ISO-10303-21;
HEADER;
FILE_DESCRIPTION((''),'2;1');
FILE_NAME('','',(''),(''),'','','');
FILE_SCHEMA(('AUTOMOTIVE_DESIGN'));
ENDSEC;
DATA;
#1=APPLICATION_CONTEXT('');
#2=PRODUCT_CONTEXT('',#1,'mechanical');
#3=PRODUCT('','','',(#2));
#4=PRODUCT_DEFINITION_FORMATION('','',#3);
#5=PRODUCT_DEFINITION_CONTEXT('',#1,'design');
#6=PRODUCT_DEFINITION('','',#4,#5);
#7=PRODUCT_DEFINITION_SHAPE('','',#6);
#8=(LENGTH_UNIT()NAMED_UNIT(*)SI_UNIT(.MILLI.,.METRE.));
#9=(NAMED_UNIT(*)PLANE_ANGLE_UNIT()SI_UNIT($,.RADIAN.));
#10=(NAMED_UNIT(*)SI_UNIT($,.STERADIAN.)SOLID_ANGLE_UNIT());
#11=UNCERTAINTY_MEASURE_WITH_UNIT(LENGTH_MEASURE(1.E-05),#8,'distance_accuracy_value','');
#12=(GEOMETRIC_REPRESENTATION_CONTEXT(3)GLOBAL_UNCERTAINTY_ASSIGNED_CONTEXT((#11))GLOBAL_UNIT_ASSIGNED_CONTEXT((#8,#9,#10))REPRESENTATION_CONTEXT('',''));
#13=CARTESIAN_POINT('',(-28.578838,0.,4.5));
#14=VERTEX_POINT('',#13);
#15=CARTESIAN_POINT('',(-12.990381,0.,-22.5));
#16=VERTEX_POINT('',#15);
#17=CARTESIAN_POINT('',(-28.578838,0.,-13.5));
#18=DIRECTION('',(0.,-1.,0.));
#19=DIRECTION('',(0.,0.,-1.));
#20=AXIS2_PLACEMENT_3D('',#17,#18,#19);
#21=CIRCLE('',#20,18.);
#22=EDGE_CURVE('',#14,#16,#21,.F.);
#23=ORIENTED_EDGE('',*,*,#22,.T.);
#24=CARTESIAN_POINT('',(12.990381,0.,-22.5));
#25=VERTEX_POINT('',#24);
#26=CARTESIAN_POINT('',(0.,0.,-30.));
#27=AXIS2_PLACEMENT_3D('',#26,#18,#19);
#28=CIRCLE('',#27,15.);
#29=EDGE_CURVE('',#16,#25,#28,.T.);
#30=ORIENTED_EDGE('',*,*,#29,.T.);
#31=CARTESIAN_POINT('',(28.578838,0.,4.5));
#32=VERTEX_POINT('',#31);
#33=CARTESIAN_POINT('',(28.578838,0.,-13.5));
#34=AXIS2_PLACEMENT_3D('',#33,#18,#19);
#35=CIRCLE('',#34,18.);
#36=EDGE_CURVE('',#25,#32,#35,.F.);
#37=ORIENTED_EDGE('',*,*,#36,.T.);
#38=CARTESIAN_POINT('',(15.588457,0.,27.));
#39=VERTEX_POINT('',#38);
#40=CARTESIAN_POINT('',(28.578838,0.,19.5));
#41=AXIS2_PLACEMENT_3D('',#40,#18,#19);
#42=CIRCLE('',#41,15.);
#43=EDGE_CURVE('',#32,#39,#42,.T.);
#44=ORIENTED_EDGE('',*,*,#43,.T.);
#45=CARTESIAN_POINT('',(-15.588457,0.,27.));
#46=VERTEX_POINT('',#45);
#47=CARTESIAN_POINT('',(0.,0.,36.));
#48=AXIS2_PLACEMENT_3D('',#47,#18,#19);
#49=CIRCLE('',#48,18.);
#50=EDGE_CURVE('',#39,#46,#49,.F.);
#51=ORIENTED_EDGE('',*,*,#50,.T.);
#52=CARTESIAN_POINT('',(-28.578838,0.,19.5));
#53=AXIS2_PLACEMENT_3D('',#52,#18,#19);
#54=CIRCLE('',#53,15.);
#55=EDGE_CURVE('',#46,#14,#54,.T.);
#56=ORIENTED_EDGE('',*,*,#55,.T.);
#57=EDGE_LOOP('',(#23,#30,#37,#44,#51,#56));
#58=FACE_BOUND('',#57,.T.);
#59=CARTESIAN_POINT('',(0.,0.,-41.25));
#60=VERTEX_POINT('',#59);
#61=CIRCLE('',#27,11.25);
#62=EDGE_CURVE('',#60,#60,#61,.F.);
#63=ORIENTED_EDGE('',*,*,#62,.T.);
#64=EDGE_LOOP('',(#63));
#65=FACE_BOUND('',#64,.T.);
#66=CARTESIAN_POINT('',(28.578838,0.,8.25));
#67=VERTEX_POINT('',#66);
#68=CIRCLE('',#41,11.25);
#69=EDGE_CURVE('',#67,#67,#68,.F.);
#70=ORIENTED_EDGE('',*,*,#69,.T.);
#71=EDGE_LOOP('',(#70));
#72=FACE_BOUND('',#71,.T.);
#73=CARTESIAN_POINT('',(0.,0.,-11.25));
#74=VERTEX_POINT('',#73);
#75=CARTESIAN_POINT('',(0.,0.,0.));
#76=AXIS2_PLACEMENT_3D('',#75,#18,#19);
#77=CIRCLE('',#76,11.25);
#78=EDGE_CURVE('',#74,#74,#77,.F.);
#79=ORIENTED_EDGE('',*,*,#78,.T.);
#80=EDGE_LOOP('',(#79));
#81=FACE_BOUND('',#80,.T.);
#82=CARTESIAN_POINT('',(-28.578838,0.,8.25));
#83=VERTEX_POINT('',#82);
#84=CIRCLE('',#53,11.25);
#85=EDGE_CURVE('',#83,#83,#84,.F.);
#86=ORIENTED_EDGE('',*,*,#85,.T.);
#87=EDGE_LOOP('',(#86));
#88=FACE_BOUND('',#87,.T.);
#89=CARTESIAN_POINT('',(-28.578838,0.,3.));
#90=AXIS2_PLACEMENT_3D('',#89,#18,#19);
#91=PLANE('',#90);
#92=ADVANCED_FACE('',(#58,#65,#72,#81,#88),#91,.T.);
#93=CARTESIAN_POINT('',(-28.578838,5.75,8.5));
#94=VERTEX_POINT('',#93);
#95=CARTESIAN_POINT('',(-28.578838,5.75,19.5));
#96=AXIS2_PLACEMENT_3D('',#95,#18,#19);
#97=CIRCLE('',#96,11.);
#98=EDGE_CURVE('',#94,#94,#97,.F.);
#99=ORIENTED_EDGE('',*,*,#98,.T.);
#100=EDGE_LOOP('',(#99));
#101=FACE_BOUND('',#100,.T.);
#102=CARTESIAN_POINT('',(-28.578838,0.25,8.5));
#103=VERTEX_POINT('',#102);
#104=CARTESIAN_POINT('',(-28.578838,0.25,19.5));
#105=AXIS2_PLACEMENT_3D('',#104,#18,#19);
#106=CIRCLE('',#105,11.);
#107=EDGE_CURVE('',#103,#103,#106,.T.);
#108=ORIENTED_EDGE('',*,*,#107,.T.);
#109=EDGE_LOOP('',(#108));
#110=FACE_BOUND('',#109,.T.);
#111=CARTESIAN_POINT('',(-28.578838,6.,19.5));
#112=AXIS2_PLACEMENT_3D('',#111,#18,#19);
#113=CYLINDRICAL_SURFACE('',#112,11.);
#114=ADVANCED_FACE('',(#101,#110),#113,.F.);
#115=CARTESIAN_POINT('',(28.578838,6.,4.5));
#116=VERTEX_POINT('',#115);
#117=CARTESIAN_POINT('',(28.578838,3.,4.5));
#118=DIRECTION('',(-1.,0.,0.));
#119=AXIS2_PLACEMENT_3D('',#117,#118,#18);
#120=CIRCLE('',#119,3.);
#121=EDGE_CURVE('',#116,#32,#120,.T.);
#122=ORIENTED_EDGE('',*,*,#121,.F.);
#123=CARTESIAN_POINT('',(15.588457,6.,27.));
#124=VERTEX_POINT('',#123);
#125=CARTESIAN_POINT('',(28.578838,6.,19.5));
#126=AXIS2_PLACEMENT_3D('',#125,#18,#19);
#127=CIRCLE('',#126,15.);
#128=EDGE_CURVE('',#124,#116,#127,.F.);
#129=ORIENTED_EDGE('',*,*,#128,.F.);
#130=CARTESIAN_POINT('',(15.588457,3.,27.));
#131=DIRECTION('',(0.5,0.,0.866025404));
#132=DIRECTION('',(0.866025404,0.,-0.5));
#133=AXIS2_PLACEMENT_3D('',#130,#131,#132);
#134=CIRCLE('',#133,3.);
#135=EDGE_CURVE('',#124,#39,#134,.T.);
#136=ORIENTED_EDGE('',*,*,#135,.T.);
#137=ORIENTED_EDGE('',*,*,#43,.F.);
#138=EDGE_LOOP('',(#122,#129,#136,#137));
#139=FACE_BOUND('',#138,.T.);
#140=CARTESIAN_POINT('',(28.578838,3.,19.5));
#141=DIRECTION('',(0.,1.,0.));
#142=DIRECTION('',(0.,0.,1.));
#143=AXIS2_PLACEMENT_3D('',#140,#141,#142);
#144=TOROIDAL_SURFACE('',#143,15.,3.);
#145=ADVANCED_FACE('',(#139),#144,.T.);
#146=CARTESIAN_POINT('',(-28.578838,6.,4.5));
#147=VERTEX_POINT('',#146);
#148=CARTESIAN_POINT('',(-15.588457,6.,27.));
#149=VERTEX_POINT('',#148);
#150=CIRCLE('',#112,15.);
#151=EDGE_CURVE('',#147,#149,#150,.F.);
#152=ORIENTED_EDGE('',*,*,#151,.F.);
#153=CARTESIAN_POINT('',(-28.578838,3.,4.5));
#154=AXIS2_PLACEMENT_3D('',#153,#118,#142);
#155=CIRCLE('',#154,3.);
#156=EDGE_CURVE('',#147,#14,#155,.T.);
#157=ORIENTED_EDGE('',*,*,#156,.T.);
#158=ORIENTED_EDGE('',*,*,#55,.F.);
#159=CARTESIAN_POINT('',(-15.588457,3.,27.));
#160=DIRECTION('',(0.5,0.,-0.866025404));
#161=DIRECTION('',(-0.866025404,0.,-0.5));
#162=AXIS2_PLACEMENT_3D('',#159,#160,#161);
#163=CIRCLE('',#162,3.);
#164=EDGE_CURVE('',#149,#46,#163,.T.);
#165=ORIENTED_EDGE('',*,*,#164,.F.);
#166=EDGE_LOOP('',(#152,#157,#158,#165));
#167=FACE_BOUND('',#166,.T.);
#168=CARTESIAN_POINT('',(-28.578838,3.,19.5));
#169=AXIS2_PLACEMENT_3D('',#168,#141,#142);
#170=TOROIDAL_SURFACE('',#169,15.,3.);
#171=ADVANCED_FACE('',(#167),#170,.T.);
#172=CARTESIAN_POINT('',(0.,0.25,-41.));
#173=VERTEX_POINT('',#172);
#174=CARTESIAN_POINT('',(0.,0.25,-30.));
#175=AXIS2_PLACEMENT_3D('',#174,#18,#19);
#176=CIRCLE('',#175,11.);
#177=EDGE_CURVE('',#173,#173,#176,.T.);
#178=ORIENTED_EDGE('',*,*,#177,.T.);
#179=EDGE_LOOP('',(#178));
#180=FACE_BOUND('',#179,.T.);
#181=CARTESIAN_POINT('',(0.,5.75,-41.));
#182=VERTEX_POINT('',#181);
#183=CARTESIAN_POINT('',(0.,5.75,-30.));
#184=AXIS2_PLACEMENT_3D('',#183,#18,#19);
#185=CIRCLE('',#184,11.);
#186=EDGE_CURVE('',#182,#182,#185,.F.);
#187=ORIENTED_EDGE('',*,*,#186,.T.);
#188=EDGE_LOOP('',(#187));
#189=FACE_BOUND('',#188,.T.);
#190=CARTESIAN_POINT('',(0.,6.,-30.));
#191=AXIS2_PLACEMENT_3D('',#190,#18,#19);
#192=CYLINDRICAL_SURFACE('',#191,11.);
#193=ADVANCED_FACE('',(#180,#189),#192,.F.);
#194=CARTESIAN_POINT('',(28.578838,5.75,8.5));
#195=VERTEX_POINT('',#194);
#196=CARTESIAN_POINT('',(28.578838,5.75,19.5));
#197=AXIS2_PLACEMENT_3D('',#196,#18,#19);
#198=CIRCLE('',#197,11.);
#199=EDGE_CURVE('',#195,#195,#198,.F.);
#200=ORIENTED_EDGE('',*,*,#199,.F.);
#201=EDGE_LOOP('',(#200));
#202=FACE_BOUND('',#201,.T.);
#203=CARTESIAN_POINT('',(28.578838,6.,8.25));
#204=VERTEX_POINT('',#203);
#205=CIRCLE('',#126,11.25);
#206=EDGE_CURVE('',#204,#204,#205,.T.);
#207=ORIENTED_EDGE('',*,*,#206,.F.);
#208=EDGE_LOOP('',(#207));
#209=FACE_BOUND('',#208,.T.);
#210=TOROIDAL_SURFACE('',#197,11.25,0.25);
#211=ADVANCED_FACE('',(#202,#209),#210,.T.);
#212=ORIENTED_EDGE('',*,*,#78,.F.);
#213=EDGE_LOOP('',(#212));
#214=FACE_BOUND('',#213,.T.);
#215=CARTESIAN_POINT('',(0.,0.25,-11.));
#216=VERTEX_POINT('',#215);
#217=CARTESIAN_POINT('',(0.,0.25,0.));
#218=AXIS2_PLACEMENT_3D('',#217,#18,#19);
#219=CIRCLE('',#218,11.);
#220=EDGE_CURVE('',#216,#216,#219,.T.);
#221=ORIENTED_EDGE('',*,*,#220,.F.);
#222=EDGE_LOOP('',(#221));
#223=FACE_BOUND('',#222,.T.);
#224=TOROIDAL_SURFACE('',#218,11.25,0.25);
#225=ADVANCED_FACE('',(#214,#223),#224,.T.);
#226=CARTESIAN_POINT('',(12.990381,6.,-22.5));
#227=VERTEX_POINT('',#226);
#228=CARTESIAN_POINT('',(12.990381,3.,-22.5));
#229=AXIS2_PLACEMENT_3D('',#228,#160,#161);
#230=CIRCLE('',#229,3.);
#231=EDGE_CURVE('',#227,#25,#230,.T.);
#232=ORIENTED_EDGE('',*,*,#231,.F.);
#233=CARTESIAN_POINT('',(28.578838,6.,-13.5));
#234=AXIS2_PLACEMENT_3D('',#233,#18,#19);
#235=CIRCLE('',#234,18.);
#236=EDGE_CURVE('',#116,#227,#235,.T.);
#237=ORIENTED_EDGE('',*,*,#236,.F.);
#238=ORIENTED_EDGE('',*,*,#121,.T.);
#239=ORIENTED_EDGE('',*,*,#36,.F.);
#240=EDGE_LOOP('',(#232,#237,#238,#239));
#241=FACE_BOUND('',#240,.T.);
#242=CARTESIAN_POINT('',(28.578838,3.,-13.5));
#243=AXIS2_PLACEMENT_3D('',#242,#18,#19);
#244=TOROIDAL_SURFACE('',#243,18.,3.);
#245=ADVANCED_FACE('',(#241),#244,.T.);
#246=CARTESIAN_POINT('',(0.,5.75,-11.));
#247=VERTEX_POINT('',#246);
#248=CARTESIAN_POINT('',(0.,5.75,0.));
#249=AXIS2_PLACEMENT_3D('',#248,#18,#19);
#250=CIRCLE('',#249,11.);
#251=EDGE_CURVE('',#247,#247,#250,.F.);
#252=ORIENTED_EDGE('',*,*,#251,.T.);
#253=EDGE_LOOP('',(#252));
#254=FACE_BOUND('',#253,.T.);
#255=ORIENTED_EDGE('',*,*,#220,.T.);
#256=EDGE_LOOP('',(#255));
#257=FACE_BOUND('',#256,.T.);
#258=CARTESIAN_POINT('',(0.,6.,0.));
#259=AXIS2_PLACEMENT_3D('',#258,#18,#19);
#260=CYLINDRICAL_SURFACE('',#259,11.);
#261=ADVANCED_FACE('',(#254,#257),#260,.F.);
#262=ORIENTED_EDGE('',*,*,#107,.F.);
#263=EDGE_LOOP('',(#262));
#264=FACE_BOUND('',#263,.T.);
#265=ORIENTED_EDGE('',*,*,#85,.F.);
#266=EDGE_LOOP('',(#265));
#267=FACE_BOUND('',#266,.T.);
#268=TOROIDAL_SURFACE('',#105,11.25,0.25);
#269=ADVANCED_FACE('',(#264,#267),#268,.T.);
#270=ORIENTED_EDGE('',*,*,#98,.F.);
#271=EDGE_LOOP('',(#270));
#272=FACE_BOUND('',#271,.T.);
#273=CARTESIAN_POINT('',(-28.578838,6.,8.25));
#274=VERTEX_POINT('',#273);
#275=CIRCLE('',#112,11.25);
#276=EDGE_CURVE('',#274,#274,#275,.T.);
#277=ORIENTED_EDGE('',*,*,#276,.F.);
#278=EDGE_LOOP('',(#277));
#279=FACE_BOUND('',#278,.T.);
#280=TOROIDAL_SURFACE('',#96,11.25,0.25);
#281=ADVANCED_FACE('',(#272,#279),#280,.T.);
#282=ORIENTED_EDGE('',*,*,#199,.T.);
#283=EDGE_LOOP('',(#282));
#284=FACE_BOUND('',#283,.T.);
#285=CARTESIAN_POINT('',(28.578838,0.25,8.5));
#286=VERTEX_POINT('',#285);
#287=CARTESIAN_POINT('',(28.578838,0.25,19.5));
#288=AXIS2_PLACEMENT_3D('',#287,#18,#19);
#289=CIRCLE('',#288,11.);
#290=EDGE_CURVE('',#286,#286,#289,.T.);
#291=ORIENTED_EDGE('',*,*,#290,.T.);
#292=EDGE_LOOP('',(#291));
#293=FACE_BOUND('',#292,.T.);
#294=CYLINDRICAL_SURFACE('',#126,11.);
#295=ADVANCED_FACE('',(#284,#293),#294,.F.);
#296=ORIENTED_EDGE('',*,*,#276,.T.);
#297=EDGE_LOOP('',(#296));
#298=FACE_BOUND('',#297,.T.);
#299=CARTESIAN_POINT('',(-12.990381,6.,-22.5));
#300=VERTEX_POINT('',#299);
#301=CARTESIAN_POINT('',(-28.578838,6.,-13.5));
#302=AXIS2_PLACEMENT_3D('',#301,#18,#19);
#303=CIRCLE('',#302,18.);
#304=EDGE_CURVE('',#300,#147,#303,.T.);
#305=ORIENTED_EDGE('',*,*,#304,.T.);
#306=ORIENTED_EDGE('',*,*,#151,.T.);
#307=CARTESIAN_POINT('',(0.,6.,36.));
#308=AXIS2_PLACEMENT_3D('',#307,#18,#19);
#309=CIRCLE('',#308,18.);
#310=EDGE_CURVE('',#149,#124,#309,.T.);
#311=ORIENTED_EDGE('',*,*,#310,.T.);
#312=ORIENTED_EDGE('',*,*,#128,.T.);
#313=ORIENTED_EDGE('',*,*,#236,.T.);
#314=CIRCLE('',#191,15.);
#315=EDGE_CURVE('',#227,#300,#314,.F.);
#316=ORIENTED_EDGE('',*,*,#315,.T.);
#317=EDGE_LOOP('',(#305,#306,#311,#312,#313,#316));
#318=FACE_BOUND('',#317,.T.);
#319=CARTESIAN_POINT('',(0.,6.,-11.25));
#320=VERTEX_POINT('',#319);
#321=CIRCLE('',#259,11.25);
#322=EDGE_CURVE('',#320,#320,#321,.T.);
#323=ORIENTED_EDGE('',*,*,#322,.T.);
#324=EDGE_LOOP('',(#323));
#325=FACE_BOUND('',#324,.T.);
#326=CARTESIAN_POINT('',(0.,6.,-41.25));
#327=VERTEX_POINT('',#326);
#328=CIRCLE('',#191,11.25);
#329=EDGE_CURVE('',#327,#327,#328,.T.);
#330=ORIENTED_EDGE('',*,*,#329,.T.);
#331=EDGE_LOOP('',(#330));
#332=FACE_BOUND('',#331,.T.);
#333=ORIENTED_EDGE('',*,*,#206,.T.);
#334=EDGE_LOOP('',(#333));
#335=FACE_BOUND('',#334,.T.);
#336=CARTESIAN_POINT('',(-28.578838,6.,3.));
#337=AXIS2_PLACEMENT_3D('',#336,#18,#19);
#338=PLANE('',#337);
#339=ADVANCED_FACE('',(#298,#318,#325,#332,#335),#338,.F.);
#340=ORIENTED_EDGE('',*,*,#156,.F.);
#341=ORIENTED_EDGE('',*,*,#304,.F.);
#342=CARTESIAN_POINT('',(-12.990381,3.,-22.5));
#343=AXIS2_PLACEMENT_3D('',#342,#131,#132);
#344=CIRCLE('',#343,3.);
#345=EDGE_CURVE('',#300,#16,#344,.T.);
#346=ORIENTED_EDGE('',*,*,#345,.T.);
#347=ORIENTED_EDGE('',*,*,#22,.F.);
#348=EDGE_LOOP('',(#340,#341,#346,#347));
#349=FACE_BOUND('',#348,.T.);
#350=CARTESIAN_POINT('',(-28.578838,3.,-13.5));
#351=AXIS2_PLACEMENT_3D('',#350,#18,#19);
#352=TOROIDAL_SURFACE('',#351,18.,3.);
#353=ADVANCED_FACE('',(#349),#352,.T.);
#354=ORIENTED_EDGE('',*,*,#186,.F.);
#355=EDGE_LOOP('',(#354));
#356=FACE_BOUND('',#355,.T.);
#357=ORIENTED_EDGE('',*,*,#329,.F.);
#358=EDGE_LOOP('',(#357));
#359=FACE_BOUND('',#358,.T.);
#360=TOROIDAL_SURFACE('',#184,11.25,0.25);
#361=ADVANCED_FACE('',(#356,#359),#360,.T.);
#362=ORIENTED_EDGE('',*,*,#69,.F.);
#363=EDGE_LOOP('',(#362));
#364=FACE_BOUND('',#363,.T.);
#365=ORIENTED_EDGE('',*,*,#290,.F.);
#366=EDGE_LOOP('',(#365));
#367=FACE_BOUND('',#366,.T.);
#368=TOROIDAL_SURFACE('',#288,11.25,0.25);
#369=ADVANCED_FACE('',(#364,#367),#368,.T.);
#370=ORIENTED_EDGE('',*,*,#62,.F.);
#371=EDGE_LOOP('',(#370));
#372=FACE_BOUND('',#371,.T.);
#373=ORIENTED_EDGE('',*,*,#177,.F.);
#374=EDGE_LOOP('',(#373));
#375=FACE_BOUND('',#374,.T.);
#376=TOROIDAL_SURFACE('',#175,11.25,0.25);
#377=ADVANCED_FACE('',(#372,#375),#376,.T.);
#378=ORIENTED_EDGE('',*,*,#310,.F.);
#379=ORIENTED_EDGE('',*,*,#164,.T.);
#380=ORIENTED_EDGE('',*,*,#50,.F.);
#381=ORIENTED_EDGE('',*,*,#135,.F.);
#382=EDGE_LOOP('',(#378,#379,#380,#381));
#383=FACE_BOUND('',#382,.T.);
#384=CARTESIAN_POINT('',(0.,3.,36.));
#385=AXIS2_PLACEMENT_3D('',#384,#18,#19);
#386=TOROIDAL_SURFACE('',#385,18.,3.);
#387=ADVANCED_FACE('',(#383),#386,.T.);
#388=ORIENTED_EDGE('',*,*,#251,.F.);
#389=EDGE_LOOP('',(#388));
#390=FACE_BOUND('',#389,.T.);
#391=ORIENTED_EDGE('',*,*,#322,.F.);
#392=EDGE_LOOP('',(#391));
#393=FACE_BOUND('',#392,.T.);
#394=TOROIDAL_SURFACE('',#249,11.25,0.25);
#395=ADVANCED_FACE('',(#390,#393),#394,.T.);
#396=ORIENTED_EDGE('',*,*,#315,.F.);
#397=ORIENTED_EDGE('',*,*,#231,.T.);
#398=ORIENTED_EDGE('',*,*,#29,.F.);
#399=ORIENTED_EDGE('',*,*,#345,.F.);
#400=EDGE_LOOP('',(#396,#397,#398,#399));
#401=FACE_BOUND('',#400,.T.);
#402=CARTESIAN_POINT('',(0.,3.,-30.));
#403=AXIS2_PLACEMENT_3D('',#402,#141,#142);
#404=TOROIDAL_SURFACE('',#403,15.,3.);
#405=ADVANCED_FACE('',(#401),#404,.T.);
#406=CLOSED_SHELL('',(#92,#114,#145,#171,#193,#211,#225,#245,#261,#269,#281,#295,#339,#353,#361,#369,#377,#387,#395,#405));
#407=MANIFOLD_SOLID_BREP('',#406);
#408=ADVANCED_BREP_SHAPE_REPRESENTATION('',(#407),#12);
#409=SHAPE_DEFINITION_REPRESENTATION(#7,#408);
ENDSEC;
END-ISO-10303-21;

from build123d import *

# Parameters (mm, degrees)
SKETCH1_R           = 11
BOSS_EXTRUDE2_DEPTH = 6
FILLET1_R           = 3
FILLET2_R           = 0.25


with BuildPart() as part:
    # Sketch1 → Boss-Extrude2 (new body)
    with BuildSketch(Plane(origin=(0, 0, 0), x_dir=(1, 0, 0), z_dir=(0, 1, 0))):
        with BuildLine():
            ThreePointArc((-28.578838325, -1.5), (-44.167295593, -28.5), (-12.990381057, -28.5))
            ThreePointArc((-12.990381057, -28.5), (0, -21), (12.990381057, -28.5))
            ThreePointArc((12.990381057, -28.5), (44.167295593, -28.5), (28.578838325, -1.5))
            ThreePointArc((28.578838325, -1.5), (15.588457268, 6), (15.588457268, 21))
            ThreePointArc((15.588457268, 21), (0, 48), (-15.588457268, 21))
            ThreePointArc((-15.588457268, 21), (-15.588457268, 6), (-28.578838325, -1.5))
        make_face()
        with Locations(Location((0, 0, 0), (0, 0, 270))):
            Circle(SKETCH1_R, mode=Mode.SUBTRACT)
        with Locations(Location((0, 30, 0), (0, 0, 270))):
            Circle(SKETCH1_R, mode=Mode.SUBTRACT)
        with Locations(Location((28.578838325, -19.5, 0), (0, 0, 270))):
            Circle(SKETCH1_R, mode=Mode.SUBTRACT)
        with Locations(Location((-28.578838325, -19.5, 0), (0, 0, 270))):
            Circle(SKETCH1_R, mode=Mode.SUBTRACT)
    extrude(amount=BOSS_EXTRUDE2_DEPTH)

    # Fillet1
    fillet1_edges = [part.edges().sort_by_distance(p)[0] for p in [
        (0, 6, 21),
        (-15.588457268, 3, -21),
        (15.588457268, 3, -21),
        (28.578838325, 3, 1.5),
        (12.990381057, 3, 28.5),
        (-12.990381057, 3, 28.5),
        (-28.578838325, 3, 1.5),
        (44.167295593, 6, 28.5),
        (15.588457268, 6, -6),
        (0, 6, -48),
        (-15.588457268, 6, -6),
        (0, 0, -48),
        (15.588457268, 0, -6),
        (44.167295593, 0, 28.5),
        (-44.167295593, 6, 28.5),
        (0, 0, 21),
        (-44.167295593, 0, 28.5),
        (-15.588457268, 0, -6),
    ]]
    fillet(fillet1_edges, radius=FILLET1_R - 0.0001)  # a hair under: the kernel refuses the full size

    # Fillet2
    fillet2_edges = [part.edges().sort_by_distance(p)[0] for p in [
        (0, 0, -11),
        (0, 6, -11),
        (0, 0, -41),
        (0, 6, -41),
        (28.578838325, 0, 8.5),
        (28.578838325, 6, 8.5),
        (-28.578838325, 0, 8.5),
        (-28.578838325, 6, 8.5),
    ]]
    fillet(fillet2_edges, radius=FILLET2_R)


solid = part.part
